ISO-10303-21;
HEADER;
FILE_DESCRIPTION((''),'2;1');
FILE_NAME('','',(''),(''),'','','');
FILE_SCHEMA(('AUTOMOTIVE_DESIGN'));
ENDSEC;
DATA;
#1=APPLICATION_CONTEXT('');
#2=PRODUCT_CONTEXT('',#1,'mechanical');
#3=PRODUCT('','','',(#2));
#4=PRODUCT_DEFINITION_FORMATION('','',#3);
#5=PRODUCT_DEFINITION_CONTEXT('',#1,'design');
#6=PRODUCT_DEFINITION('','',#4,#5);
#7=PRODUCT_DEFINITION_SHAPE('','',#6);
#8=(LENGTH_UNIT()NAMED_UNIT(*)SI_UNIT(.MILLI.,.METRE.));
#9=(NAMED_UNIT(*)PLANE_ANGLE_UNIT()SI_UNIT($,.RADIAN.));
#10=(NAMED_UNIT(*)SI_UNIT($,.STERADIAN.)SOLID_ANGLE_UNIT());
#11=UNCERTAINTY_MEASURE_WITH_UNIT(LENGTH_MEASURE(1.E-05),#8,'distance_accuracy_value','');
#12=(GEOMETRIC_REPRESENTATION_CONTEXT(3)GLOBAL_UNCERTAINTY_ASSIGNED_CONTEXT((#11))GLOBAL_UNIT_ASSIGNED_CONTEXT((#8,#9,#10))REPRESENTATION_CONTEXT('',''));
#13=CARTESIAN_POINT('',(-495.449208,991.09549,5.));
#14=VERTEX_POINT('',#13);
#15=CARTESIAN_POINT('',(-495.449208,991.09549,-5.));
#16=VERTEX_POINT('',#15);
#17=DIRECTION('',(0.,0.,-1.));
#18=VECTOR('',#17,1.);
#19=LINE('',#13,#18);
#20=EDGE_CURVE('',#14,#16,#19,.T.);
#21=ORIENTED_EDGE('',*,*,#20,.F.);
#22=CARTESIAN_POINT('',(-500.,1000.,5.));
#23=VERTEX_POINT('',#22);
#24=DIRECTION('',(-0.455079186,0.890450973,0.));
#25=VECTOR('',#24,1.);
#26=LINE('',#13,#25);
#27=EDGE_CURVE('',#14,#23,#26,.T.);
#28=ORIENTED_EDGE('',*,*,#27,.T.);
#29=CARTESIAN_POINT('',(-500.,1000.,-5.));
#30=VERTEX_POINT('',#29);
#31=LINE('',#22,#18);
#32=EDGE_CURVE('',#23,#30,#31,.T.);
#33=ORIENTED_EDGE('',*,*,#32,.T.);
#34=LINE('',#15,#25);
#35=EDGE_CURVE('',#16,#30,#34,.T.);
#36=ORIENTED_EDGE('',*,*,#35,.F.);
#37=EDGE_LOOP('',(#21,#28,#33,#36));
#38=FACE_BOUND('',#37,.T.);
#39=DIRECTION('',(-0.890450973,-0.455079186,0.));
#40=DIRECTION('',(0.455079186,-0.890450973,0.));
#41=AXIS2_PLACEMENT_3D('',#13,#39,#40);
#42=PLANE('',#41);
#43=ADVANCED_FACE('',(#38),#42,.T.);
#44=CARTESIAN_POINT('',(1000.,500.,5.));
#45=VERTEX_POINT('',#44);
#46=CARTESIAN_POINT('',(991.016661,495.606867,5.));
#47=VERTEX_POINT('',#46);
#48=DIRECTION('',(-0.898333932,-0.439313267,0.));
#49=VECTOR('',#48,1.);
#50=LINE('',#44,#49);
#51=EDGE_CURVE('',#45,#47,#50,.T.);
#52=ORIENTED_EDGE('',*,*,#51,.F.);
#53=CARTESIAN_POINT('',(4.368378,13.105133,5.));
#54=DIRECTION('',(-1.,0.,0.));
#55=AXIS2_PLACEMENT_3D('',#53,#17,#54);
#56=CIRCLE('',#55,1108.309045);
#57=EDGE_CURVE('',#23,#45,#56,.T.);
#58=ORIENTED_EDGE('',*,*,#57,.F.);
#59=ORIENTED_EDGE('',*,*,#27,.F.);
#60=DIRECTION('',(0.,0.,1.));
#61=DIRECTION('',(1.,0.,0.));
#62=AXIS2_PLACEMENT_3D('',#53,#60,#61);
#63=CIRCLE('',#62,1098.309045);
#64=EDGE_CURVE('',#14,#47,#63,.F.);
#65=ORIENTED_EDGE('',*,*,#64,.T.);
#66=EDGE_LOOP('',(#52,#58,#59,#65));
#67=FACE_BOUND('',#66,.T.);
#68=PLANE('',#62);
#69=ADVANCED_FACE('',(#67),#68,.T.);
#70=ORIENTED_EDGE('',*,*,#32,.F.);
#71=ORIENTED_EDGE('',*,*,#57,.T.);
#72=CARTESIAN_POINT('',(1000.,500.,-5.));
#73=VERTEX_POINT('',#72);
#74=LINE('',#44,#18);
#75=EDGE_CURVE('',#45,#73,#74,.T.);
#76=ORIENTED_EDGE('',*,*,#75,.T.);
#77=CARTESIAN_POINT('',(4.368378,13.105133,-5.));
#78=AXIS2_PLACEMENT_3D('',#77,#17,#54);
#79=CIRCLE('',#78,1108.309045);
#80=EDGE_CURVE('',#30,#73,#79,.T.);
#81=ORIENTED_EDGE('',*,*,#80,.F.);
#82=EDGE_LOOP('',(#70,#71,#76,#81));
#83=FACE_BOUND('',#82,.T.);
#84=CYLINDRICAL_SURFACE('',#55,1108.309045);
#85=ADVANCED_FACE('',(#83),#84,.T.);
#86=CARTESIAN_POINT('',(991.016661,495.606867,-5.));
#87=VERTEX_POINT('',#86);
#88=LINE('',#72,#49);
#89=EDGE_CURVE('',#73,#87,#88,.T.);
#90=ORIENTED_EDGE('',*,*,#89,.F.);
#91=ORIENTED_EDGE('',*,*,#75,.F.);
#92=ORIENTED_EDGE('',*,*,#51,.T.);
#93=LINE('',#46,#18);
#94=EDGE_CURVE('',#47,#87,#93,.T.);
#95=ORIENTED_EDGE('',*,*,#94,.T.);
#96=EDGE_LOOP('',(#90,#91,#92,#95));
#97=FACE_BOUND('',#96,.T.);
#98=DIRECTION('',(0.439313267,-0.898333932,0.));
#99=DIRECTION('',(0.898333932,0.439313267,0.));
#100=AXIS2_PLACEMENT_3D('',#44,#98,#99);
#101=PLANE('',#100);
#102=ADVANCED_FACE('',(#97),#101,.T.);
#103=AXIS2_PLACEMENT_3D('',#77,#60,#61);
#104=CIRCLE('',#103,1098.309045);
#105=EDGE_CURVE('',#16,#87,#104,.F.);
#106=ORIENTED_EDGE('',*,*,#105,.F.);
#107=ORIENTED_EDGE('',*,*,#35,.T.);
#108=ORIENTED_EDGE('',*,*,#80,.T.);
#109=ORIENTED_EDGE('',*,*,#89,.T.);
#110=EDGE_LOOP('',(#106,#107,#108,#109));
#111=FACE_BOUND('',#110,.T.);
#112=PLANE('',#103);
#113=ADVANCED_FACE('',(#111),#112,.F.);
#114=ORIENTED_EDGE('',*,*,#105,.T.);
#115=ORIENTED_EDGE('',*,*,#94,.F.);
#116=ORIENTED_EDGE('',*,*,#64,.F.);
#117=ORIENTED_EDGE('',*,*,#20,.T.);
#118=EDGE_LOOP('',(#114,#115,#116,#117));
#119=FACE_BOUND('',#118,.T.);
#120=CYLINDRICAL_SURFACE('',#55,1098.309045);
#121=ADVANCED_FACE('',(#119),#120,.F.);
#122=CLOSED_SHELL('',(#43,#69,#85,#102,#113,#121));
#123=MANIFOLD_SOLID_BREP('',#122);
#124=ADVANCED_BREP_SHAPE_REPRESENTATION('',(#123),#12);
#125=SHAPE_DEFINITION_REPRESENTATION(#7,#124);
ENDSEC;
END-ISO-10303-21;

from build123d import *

# Parameters (mm, degrees)
SM_BASE_FLANGE_1_DEPTH = 5


# Sheet-metal steps are written as plain solids
with BuildPart() as part:
    # Sketch 1 → 基体-法兰1 (new, symmetric)
    with BuildSketch(Plane.XY):
        with BuildLine():
            ThreePointArc((-500, 1000), (354.84647099, 1064.539412971), (1000, 500))
            Line((1000, 500), (991.016660678, 495.606867334))
            ThreePointArc((991.016660678, 495.606867334), (351.68419333, 1055.052579991), (-495.449208142, 991.095490274))
            Line((-495.449208142, 991.095490274), (-500, 1000))
        make_face()
    extrude(amount=SM_BASE_FLANGE_1_DEPTH, both=True)


solid = part.part
